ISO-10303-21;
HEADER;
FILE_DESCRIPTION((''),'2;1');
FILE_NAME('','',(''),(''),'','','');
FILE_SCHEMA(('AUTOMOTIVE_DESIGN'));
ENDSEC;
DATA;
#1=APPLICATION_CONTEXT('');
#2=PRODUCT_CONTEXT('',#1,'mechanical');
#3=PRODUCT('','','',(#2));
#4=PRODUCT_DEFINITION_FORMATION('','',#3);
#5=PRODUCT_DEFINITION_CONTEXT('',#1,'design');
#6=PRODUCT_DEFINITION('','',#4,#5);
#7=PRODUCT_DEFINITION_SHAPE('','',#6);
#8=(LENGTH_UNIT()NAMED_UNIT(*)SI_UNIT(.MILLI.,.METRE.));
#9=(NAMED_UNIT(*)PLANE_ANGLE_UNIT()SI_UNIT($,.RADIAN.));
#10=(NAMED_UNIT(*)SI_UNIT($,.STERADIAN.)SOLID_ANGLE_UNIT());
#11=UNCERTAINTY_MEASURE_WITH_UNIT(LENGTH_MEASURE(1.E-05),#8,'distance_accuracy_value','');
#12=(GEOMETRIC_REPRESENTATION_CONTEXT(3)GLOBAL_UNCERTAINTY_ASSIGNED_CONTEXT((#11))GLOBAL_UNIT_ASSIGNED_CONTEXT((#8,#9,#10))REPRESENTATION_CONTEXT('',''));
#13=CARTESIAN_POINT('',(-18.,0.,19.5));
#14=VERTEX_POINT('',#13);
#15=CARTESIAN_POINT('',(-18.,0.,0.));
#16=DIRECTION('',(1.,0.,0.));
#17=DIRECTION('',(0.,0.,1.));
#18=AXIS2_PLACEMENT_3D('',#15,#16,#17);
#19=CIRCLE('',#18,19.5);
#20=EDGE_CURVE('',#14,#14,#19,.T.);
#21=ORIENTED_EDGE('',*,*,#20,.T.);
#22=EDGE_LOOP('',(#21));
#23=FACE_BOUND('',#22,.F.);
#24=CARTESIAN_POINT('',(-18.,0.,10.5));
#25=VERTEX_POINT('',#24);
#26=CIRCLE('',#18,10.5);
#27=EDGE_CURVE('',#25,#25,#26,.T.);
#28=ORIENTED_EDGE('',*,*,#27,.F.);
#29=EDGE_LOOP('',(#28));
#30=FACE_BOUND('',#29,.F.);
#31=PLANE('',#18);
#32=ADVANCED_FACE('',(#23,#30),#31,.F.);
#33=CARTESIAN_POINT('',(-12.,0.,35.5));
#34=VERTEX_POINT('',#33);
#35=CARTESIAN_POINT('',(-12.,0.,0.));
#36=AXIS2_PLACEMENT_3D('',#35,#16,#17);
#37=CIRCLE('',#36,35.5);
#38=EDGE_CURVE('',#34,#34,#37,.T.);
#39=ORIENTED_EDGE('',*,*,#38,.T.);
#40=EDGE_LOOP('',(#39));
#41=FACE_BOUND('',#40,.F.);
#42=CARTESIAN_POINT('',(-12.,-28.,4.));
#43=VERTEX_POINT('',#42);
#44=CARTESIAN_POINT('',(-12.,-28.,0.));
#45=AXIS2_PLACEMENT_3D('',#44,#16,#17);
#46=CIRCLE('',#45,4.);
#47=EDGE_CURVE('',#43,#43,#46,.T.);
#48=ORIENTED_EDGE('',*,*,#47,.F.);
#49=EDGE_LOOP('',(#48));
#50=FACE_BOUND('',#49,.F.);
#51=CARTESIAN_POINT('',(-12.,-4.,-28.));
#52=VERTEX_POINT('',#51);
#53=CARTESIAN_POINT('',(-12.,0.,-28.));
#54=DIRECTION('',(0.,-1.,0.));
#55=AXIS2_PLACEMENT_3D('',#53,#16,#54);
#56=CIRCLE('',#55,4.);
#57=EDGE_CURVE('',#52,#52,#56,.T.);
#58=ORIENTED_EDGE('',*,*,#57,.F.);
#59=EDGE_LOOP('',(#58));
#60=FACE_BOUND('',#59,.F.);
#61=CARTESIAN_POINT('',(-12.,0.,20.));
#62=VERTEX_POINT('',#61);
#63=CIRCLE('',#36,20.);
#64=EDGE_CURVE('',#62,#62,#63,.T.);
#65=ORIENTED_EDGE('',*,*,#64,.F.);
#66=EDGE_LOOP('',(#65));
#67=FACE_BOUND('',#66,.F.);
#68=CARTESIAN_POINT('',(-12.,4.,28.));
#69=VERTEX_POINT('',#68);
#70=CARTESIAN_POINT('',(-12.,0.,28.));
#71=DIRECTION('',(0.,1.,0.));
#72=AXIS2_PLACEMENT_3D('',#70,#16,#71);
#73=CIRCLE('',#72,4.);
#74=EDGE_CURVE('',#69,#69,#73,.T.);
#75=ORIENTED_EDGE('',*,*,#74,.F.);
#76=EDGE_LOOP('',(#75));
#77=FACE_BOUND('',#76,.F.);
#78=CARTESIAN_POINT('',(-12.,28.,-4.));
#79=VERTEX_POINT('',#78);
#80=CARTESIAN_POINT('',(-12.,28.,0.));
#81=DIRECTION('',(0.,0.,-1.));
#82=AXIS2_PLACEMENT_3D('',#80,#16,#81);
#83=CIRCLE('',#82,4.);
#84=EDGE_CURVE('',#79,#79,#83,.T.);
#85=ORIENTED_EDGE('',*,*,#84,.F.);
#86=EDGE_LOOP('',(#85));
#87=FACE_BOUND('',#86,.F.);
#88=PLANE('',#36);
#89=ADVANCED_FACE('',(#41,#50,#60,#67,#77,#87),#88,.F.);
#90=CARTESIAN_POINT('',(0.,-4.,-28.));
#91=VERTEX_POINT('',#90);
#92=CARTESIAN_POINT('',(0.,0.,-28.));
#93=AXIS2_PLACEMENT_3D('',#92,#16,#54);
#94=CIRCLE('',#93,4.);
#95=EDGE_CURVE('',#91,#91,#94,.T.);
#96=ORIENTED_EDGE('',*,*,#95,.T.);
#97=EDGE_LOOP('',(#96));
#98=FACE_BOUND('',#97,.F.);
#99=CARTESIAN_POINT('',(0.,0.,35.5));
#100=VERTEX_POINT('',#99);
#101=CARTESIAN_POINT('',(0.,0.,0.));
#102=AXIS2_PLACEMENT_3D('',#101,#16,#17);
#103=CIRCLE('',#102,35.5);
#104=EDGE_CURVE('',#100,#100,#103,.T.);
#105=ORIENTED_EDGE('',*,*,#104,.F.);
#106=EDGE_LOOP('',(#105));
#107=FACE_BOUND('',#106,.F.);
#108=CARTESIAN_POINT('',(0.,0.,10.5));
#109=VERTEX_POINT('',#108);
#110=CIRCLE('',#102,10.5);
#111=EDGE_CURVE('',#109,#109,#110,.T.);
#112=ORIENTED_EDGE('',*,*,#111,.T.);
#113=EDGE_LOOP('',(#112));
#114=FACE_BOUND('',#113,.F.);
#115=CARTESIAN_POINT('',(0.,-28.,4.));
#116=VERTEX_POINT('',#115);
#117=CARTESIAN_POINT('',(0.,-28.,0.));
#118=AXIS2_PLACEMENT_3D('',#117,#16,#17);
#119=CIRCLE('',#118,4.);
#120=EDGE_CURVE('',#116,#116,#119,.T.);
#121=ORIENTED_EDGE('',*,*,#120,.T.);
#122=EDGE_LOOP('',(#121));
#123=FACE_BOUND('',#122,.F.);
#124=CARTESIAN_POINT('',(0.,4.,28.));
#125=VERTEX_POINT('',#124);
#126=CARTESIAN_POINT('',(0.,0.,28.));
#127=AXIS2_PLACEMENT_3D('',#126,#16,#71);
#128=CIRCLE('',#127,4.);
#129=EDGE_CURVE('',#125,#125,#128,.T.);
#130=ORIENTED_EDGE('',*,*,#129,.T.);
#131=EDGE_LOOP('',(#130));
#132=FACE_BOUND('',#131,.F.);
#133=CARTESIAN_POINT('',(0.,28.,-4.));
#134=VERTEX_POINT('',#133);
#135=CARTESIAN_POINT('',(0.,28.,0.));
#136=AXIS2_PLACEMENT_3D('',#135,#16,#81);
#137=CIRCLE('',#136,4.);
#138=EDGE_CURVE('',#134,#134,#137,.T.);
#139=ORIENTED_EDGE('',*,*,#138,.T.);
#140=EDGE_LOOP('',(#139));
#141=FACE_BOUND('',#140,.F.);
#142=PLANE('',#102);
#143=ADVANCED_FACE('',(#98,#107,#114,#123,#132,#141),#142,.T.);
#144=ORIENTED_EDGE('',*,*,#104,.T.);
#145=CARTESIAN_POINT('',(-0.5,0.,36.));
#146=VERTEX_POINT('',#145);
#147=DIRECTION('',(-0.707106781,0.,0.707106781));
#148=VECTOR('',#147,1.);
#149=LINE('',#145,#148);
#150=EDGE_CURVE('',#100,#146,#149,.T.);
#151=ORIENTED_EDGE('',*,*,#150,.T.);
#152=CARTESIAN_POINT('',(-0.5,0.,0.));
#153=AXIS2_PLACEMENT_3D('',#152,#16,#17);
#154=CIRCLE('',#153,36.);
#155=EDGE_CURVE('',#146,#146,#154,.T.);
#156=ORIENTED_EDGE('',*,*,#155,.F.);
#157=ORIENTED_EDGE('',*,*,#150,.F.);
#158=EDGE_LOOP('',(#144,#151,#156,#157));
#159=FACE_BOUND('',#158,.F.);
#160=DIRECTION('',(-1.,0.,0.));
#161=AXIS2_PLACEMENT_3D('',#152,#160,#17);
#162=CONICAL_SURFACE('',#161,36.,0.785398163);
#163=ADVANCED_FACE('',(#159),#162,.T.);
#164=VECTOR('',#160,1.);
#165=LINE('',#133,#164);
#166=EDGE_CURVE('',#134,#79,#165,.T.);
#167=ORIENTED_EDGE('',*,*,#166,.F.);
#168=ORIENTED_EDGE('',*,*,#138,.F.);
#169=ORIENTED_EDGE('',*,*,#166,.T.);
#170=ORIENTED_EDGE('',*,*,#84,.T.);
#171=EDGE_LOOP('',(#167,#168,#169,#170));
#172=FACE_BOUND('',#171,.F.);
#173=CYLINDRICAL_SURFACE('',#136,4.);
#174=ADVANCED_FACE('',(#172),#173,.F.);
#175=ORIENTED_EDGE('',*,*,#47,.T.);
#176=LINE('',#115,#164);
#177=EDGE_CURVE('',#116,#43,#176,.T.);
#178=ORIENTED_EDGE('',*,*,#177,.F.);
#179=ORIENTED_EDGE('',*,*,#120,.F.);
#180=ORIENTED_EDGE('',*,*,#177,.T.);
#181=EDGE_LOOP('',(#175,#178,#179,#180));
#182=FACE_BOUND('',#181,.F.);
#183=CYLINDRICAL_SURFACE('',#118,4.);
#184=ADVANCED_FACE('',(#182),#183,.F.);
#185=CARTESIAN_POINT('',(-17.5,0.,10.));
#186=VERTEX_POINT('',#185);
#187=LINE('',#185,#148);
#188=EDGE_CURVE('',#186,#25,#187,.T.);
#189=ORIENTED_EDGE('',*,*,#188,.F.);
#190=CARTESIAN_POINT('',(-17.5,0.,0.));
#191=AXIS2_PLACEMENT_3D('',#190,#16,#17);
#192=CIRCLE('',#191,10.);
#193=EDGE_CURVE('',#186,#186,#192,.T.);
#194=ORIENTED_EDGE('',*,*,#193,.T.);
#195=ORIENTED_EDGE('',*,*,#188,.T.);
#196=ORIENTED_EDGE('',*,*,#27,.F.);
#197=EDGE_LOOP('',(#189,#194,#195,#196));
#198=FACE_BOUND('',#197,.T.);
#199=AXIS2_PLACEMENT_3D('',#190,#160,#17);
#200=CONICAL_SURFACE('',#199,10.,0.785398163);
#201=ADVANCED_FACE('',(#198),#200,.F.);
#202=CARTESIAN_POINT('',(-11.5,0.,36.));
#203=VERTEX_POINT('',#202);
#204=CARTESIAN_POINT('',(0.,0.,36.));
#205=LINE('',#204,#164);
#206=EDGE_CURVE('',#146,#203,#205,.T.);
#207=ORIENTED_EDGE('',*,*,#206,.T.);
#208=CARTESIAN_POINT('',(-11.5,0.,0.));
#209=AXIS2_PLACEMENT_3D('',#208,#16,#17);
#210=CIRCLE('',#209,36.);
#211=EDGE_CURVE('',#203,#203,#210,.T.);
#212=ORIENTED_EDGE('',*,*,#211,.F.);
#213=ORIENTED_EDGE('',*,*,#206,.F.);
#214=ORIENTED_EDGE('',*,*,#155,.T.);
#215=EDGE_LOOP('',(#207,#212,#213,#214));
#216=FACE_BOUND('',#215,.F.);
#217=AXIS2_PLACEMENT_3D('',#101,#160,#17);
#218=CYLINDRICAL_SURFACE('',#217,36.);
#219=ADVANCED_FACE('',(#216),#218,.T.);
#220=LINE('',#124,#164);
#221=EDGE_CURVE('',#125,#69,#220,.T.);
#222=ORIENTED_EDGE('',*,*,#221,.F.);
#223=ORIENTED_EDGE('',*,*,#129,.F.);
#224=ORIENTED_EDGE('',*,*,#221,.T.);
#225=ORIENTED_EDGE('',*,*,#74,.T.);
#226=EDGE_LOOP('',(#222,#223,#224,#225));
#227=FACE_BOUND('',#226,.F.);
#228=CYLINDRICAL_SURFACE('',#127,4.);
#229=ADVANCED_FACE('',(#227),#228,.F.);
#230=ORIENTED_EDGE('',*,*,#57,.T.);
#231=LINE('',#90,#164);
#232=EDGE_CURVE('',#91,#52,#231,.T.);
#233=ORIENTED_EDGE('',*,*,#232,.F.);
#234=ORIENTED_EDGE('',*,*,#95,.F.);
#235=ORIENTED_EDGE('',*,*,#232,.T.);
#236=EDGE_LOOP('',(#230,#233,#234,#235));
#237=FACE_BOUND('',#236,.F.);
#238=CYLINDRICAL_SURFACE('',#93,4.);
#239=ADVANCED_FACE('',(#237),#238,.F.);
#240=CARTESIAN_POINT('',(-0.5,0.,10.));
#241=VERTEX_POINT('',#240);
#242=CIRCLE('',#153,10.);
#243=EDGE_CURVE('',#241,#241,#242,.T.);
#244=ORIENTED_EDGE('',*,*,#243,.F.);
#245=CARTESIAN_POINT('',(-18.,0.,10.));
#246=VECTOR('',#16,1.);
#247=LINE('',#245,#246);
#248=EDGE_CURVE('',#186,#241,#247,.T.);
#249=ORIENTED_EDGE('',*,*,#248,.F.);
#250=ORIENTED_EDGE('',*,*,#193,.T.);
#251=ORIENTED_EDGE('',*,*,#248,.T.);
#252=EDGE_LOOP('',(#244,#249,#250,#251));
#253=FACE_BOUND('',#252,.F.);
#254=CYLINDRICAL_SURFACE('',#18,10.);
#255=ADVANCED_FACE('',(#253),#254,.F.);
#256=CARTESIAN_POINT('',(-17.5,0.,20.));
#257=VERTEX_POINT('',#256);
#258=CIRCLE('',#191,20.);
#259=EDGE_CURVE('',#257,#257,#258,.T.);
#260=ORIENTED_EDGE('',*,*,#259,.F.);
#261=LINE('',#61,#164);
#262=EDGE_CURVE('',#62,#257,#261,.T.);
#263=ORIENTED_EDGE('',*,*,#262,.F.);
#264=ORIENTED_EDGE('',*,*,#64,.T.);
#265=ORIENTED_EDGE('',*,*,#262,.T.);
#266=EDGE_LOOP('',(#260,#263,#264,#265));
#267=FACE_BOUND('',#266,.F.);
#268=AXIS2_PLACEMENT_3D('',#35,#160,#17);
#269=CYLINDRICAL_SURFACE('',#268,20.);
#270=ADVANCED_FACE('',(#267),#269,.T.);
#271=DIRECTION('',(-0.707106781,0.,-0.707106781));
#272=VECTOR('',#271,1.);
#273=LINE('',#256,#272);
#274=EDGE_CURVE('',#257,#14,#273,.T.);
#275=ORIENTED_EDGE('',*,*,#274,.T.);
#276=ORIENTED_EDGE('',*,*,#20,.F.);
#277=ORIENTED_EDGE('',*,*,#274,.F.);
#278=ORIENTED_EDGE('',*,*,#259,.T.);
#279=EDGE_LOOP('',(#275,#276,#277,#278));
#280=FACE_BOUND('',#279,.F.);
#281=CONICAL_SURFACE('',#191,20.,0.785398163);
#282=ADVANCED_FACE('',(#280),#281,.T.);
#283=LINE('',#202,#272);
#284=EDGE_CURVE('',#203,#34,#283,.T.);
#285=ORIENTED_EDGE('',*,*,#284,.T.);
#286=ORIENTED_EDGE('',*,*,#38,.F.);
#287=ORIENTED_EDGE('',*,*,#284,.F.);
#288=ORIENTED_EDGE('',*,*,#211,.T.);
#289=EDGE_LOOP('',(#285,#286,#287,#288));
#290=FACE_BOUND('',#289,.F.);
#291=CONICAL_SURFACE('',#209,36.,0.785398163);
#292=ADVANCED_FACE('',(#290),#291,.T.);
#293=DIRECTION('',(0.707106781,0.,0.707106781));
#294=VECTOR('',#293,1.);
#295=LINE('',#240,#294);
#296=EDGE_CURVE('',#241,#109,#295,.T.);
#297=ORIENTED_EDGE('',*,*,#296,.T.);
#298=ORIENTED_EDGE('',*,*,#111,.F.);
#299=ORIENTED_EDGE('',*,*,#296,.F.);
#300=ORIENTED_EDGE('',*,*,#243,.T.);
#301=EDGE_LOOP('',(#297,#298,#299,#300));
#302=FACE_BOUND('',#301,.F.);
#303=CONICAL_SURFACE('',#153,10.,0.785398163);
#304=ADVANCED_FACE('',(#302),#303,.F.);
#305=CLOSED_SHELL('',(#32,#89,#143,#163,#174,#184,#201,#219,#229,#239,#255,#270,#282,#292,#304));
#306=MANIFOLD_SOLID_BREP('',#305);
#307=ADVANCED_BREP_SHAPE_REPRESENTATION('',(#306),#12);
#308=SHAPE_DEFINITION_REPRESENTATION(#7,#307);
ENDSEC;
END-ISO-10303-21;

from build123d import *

# Parameters (mm, degrees)
F2_SIZE         = 0.5
F3_R            = 4
F4_DEPTH        = 18.001
F4_COPIES_COUNT = 4


# Not quite as in the source:
# - a pattern or mirror of a feature is missing from the dataset's text; its kind, count and spacing are read off the source's solid


with BuildPart() as f1:
    # F0 (on Front) → F1 (revolve)
    with BuildSketch(Plane.XZ):
        Polygon((-18, 10), (0, 10), (0, 36), (-12, 36), (-12, 20), (-18, 20), align=None)
    revolve(axis=Axis((-9, 0, 0), (1, 0, 0)))

    # F2
    f2_edges = [f1.edges().sort_by_distance(p)[0] for p in [
        (-18, 0, -20),
        (-18, 0, -10),
        (-12, 0, -36),
        (0, 0, -10),
        (0, 0, -36),
    ]]
    chamfer(f2_edges, length=F2_SIZE)

    # F3 (on Right) → F4 (cut, through all)
    with BuildSketch(Plane.YZ):
        with Locations((0, 28)):
            Circle(F3_R)
    f4 = extrude(amount=-F4_DEPTH, mode=Mode.SUBTRACT)

    # F4_copies: F4 ×4 about axis
    f4_copies_axis = Axis((0, 0, 0), (1, 0, 0))
    for i in range(1, F4_COPIES_COUNT):
        add(f4.rotate(f4_copies_axis, i * 360 / F4_COPIES_COUNT), mode=Mode.SUBTRACT)


solid = f1.part
